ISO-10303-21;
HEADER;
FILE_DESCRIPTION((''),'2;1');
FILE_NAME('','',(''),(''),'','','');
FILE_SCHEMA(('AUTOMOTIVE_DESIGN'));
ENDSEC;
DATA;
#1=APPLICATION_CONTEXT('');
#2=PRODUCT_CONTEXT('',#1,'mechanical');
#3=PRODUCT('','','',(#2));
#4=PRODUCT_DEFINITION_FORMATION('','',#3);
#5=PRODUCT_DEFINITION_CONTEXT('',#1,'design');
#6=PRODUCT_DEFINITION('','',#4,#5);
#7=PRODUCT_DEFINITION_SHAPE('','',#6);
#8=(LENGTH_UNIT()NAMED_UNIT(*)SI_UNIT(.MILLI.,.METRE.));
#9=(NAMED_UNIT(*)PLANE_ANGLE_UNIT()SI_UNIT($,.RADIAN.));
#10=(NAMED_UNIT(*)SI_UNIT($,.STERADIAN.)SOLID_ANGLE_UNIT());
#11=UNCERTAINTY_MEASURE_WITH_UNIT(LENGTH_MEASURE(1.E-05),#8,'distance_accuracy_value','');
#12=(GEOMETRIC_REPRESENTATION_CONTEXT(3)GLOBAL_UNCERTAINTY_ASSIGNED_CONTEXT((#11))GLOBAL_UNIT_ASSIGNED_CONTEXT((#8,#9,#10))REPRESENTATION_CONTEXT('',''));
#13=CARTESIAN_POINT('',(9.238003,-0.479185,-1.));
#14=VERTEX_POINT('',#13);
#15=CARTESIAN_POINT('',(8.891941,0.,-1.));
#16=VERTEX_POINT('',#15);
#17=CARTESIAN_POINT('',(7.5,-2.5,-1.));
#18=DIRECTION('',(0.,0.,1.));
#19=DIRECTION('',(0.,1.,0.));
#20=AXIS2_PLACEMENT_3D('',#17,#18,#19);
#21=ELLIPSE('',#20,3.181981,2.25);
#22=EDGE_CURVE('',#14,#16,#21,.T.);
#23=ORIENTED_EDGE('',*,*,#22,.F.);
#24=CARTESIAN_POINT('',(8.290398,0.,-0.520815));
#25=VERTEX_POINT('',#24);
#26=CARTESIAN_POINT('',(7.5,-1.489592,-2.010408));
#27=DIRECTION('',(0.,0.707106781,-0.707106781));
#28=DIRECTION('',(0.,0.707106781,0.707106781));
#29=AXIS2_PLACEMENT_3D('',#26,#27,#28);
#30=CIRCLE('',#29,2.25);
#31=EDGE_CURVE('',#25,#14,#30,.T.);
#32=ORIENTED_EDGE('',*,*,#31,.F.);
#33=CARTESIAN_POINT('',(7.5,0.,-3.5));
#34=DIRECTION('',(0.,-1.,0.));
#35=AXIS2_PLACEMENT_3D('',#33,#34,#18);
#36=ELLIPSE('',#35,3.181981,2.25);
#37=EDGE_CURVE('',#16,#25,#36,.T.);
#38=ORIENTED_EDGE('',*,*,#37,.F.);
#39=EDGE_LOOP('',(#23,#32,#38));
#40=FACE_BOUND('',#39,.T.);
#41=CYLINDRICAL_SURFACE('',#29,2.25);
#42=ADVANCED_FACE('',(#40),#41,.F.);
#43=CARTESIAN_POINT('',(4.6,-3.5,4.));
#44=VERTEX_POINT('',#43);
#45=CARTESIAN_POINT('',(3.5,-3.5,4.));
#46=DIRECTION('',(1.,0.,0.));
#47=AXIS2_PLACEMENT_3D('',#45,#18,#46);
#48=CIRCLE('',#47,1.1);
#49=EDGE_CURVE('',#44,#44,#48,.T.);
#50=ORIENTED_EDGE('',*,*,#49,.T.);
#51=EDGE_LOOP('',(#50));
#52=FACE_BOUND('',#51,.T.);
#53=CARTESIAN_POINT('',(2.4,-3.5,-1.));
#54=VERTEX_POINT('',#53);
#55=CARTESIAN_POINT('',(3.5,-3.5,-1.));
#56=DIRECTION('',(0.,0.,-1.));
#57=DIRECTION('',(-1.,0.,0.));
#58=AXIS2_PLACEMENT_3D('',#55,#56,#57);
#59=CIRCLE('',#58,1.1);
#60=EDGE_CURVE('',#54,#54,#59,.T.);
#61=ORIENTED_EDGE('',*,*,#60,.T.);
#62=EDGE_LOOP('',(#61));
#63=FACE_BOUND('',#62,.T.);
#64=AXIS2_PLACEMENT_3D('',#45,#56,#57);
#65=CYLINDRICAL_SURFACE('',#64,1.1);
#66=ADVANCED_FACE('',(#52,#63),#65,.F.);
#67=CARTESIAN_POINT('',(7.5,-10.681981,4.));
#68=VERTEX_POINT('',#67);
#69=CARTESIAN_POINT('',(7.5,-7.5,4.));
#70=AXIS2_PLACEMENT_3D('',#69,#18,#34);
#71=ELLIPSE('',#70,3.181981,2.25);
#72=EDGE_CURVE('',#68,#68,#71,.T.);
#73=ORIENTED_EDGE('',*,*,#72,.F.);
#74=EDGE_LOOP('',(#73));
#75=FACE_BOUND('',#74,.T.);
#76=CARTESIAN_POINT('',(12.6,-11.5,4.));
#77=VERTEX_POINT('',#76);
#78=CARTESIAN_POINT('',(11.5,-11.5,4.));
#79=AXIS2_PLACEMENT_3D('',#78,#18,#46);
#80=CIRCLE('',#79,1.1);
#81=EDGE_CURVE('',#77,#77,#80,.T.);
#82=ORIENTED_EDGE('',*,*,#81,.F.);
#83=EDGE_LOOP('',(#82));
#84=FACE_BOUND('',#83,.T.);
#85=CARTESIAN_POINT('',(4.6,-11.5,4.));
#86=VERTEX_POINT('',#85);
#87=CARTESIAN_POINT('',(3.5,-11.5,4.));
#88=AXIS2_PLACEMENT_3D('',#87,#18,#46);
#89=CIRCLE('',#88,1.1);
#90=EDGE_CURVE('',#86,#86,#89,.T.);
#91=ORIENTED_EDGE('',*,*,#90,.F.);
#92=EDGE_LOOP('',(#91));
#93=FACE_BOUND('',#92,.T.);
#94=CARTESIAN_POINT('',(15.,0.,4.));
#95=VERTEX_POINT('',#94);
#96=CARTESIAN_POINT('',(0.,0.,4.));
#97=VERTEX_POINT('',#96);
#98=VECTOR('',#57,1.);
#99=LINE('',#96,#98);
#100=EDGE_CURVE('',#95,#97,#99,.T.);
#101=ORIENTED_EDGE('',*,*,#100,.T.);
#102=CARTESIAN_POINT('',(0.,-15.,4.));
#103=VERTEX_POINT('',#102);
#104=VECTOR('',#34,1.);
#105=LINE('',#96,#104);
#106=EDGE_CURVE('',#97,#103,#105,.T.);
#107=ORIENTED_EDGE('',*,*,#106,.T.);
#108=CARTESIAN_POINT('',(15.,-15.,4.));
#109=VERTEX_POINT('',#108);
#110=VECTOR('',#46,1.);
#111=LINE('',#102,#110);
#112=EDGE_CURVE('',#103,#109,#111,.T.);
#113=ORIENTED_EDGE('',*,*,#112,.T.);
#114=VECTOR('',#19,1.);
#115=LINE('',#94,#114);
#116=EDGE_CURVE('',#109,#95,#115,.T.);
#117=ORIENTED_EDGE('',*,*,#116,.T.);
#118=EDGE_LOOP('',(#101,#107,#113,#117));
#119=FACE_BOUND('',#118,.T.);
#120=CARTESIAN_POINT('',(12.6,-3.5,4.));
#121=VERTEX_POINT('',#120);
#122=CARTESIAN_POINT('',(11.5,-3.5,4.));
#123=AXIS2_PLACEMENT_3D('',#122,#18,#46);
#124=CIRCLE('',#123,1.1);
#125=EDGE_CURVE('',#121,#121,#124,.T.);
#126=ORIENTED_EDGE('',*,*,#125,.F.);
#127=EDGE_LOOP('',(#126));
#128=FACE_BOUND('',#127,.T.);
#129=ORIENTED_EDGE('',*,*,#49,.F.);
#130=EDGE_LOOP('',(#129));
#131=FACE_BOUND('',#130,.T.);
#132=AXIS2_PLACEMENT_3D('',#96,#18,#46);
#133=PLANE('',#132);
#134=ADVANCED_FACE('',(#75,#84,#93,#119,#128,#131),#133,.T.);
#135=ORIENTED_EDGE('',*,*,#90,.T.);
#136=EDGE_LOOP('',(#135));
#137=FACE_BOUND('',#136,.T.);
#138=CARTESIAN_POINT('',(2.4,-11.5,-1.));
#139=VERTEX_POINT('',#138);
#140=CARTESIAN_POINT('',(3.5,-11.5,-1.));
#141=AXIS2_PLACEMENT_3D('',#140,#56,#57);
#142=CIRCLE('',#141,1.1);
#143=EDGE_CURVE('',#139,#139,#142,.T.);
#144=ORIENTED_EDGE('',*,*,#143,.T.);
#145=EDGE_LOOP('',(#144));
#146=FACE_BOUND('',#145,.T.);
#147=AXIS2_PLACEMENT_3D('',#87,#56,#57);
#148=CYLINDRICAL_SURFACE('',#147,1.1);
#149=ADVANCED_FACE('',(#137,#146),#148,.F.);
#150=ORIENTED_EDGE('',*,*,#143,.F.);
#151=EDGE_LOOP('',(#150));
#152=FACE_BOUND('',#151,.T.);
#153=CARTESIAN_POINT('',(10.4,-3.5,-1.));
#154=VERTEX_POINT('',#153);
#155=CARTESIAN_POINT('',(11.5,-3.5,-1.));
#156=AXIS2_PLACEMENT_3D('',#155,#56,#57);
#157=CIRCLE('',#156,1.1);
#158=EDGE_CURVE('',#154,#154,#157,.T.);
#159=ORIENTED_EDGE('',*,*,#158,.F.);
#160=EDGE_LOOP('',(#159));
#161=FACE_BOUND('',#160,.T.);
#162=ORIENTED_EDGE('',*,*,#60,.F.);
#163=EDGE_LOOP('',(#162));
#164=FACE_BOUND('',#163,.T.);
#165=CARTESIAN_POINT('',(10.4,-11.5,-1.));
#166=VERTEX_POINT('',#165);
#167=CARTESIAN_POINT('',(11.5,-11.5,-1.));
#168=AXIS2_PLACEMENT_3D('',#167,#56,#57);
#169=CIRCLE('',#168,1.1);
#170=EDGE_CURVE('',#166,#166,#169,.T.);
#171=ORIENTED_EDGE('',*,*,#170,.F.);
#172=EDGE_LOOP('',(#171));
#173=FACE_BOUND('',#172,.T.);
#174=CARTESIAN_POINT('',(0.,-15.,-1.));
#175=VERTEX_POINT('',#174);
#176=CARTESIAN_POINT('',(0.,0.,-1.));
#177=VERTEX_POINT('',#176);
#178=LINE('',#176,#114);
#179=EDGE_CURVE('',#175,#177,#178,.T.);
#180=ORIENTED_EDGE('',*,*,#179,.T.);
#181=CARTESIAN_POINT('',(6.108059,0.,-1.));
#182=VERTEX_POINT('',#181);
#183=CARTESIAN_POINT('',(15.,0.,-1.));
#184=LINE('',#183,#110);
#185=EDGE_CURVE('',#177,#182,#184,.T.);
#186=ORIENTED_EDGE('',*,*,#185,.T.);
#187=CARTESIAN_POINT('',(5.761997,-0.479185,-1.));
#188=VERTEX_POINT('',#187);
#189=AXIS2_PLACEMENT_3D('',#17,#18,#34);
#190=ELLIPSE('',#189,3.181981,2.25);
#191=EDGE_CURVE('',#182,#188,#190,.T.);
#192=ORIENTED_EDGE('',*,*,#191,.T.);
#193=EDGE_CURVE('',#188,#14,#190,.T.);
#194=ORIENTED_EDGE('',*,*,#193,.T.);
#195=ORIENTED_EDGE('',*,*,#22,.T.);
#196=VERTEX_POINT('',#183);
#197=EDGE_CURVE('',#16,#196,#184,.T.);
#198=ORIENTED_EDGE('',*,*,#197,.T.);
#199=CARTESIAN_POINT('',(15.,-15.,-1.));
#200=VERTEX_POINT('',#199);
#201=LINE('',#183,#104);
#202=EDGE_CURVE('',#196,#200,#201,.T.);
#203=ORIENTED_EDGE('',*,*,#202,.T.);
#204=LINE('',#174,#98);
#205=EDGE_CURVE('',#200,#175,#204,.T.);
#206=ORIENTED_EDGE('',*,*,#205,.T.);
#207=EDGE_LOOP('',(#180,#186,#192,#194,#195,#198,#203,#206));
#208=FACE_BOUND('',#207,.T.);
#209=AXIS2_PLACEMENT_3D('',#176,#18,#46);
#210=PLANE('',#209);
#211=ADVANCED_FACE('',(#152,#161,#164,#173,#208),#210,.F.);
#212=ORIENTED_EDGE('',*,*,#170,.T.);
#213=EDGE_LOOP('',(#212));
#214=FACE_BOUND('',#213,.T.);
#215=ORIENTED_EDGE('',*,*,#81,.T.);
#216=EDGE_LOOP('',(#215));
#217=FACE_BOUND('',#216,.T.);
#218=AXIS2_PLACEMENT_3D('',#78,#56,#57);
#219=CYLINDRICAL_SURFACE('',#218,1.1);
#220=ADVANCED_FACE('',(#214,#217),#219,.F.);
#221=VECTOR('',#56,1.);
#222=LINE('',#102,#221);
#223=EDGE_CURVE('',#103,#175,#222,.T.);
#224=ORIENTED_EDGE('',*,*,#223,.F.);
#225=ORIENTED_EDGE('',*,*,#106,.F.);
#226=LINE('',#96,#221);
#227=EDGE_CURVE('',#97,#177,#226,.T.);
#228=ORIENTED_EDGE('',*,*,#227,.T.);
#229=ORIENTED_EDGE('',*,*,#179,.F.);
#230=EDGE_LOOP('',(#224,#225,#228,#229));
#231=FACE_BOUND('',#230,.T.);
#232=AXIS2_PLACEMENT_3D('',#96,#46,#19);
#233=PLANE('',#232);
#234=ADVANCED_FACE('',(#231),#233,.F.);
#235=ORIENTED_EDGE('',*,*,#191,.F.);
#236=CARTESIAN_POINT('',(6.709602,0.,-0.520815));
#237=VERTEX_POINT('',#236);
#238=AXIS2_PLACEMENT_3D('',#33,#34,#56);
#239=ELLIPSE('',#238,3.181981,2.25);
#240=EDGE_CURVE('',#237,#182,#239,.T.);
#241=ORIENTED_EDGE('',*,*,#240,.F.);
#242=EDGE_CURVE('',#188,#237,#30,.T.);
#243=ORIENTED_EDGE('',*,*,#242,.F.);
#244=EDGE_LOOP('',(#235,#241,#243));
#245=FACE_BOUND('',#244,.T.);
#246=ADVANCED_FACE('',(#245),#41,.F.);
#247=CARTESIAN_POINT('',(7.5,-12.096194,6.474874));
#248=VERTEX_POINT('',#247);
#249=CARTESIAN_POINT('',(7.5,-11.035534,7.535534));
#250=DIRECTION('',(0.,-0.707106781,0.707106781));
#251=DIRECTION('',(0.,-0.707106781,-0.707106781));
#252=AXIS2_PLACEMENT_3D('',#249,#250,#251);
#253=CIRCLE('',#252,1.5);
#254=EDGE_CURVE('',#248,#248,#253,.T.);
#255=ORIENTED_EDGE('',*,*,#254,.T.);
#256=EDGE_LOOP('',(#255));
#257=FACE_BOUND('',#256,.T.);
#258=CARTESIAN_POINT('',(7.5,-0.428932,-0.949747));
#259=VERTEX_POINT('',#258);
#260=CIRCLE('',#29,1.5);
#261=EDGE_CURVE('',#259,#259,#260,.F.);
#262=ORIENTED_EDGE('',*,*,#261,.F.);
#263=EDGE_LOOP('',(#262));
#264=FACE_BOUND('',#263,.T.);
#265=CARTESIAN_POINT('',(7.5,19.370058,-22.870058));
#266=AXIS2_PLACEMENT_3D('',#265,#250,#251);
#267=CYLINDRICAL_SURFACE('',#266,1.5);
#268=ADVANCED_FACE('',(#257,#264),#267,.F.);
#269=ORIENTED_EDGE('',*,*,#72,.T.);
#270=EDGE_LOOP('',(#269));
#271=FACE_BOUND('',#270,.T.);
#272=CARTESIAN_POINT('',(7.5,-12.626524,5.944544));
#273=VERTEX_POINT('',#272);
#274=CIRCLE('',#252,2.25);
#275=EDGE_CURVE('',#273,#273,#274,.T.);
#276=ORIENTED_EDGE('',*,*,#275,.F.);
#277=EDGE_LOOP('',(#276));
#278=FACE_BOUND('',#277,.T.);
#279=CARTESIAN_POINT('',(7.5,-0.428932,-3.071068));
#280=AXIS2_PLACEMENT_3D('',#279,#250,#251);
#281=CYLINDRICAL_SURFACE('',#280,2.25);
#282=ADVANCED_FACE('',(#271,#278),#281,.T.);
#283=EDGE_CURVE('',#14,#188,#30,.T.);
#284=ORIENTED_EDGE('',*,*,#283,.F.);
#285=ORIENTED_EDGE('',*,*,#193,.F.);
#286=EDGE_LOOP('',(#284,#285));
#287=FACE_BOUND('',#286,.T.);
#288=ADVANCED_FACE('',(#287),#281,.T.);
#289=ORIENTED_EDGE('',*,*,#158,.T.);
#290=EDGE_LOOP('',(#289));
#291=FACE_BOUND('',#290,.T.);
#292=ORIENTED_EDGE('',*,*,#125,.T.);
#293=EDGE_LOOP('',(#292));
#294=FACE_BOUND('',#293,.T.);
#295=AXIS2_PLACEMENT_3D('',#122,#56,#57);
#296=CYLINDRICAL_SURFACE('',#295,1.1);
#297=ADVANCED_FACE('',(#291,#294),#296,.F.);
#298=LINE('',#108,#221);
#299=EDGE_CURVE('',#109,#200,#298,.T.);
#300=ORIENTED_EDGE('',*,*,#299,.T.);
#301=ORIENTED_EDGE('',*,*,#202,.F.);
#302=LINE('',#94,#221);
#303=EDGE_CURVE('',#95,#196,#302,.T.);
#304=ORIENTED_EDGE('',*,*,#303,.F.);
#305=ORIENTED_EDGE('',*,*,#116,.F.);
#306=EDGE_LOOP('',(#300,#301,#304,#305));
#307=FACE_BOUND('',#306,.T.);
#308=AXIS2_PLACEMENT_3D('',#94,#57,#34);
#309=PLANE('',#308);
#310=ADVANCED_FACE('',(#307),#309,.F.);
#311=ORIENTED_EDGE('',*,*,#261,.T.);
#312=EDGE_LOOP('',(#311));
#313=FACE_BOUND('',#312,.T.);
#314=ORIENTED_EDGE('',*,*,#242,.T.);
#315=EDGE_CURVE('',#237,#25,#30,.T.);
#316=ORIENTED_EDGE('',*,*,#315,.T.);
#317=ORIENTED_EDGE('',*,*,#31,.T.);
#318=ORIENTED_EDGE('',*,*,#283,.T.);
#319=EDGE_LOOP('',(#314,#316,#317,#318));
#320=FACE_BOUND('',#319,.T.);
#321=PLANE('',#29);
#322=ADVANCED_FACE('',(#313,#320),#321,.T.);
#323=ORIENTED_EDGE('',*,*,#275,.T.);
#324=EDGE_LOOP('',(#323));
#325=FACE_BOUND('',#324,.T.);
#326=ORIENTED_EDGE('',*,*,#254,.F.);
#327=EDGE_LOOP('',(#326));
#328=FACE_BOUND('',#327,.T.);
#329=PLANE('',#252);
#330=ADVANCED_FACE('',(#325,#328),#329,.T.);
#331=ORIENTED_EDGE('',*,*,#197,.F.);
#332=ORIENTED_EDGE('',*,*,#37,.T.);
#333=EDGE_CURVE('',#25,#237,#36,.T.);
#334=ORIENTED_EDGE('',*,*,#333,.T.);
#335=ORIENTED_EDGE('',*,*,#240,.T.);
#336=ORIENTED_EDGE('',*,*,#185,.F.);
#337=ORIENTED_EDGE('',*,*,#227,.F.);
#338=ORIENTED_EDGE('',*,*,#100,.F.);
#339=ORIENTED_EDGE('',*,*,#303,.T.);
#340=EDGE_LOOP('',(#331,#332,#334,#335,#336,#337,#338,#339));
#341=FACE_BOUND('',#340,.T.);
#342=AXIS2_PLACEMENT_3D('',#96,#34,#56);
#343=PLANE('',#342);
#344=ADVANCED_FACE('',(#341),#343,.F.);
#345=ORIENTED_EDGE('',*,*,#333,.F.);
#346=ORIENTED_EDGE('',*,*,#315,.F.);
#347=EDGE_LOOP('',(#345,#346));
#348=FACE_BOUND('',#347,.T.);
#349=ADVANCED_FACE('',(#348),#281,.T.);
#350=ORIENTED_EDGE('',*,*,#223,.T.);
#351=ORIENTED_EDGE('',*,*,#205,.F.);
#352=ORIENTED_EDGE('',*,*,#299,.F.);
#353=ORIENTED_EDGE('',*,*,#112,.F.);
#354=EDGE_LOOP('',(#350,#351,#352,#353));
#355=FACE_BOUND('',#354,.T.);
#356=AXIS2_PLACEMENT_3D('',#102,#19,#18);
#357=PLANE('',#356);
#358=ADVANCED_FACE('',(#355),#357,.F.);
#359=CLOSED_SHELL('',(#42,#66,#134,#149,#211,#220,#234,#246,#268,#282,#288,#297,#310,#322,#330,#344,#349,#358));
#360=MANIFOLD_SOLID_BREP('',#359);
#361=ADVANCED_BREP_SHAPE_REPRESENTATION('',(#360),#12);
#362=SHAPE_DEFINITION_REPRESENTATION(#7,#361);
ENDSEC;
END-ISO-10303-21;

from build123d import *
from build123d.topology import SkipClean

# Parameters (mm, degrees)
SKETCH1_W            = 15
SKETCH1_H            = 15
SKETCH1_R            = 1.1
EXTRUDE1_DEPTH       = 4
EXTRUDE2_DEPTH       = 60
EXTRUDE2_DEPTH_BACK  = 4
SKETCH3_R            = 2
SKETCH4_R            = 1.75
EXTRUDE3_DEPTH       = 3
SKETCH5_R            = 2
EXTRUDE4_DEPTH       = 3
SKETCH9_R            = 0.5
EXTRUDE8_DEPTH       = 63
EXTRUDE_START        = 1
SKETCH_4_W           = 15
SKETCH_4_H           = 15
SKETCH_4_R           = 1.1
EXTRUDE_1_DEPTH      = 1
SKETCH_3_R           = 1.5
CUT_EXTRUDE_2_DEPTH  = 104
SKETCH_5_W           = 63.20966087
SKETCH_5_H           = 58.197081521
CUT_EXTRUDE_3_DEPTH  = 40
EXTRUDE_2_DEPTH      = 5
EXTRUDE_2_DEPTH_BACK = 10
SKETCH_6_R           = 2.25
SKETCH_6_R_2         = 1.5
CUT_EXTRUDE_START    = -1.5
SKETCH_7_R           = 2.25
CUT_EXTRUDE_4_DEPTH  = 1.5


with BuildPart() as part:
    # Sketch1 → Extrude1 (new body)
    with BuildSketch(Plane.XY):
        with Locations((7.5, -7.5)):
            Rectangle(SKETCH1_W, SKETCH1_H)
        with Locations((3.5, -3.5)):
            Circle(SKETCH1_R, mode=Mode.SUBTRACT)
        with Locations((11.5, -3.5)):
            Circle(SKETCH1_R, mode=Mode.SUBTRACT)
        with Locations((11.5, -11.5)):
            Circle(SKETCH1_R, mode=Mode.SUBTRACT)
        with Locations((3.5, -11.5)):
            Circle(SKETCH1_R, mode=Mode.SUBTRACT)
    extrude(amount=EXTRUDE1_DEPTH)

    # Sketch3 → Extrude2 (add, two sides: drawn at the far end of the back side and taken through both)
    with BuildSketch(Plane(origin=(0, -5.75, 5.75), x_dir=(1, 0, 0), z_dir=(0, -0.7071067811865488, 0.7071067811865464)).offset(-EXTRUDE2_DEPTH_BACK)):
        with Locations(Location((7.5, -2.474873734, 0), (0, 0, 270))):
            Circle(SKETCH3_R)
    extrude(amount=EXTRUDE2_DEPTH + EXTRUDE2_DEPTH_BACK)

    # Sketch4 → Extrude3 (add)
    with BuildSketch(Plane(origin=(0, -48.176406871, 48.176406871), x_dir=(1, 0, 0), z_dir=(0, -0.7071067811865487, 0.7071067811865465))):
        with Locations(Location((7.5, -2.474873734, 0), (0, 0, 90))):
            Circle(SKETCH4_R)
    extrude(amount=EXTRUDE3_DEPTH)

    # Sketch5 → Extrude4 (add)
    with BuildSketch(Plane(origin=(0, -50.297727215, 50.297727215), x_dir=(-1, 0, 0), z_dir=(0, -0.7071067811865486, 0.7071067811865465))):
        with Locations(Location((-7.5, 2.474873734, 0), (0, 0, 90))):
            Circle(SKETCH5_R)
    extrude(amount=EXTRUDE4_DEPTH)

    # Sketch9 → Extrude8 (cut)
    with BuildSketch(Plane(origin=(0, 0, 0), x_dir=(0, 0, -1), z_dir=(1, 0, 0))):
        with Locations(Location((-47.487067043, -50.987067043, 0), (0, 0, 180))):
            Circle(SKETCH9_R)
    extrude(amount=EXTRUDE8_DEPTH, mode=Mode.SUBTRACT)

    # 草图4 → 凸台-拉伸1 (add)
    with SkipClean():  # the faces are left unmerged after this step: merging them gives an invalid solid
        with BuildSketch(Plane(origin=(0, 0, 0), x_dir=(-1, 0, 0), z_dir=(0, 0, -1)).offset(EXTRUDE_START)):
            with Locations((-7.5, -7.5)):
                Rectangle(SKETCH_4_W, SKETCH_4_H)
            with Locations((-3.5, -3.5)):
                Circle(SKETCH_4_R, mode=Mode.SUBTRACT)
            with Locations((-11.5, -3.5)):
                Circle(SKETCH_4_R, mode=Mode.SUBTRACT)
            with Locations((-11.5, -11.5)):
                Circle(SKETCH_4_R, mode=Mode.SUBTRACT)
            with Locations((-3.5, -11.5)):
                Circle(SKETCH_4_R, mode=Mode.SUBTRACT)
        extrude(amount=-EXTRUDE_1_DEPTH)

    # 草图3 → 切除-拉伸2 (cut)
    with BuildSketch(Plane(origin=(0, -52.419047558, 52.419047558), x_dir=(1, 0, 0), z_dir=(0, -0.7071067811865487, 0.7071067811865465))):
        with Locations(Location((7.5, -2.474873734, 0), (0, 0, 270))):
            Circle(SKETCH_3_R)
    extrude(amount=-CUT_EXTRUDE_2_DEPTH, mode=Mode.SUBTRACT)

    # 草图5 → 切除-拉伸3 (cut)
    with SkipClean():  # the faces are left unmerged after this step: merging them gives an invalid solid
        with BuildSketch(Plane(origin=(15, 0, 0), x_dir=(0, 0, -1), z_dir=(1, 0, 0))):
            with Locations((-35.604830435, -29.098540761)):
                Rectangle(SKETCH_5_W, SKETCH_5_H)
        extrude(amount=-CUT_EXTRUDE_3_DEPTH, mode=Mode.SUBTRACT)
    add(part.part.scale(1), mode=Mode.REPLACE)  # the faces are merged on a copy

    # 草图6 → 凸台-拉伸2 (add, two sides: drawn at the far end of the back side and taken through both)
    with BuildSketch(Plane(origin=(0, -5.75, 5.75), x_dir=(1, 0, 0), z_dir=(0, -0.7071067811865488, 0.7071067811865464)).offset(-EXTRUDE_2_DEPTH_BACK)):
        with Locations(Location((7.5, -2.474873734, 0), (0, 0, 270))):
            Circle(SKETCH_6_R)
        with Locations(Location((7.5, -2.474873734, 0), (0, 0, 270))):
            Circle(SKETCH_6_R_2, mode=Mode.SUBTRACT)
    extrude(amount=EXTRUDE_2_DEPTH + EXTRUDE_2_DEPTH_BACK)

    # 草图7 → 切除-拉伸4 (cut)
    with SkipClean():  # the faces are left unmerged after this step: merging them gives an invalid solid
        with BuildSketch(Plane(origin=(0, 1.321067812, -1.321067812), x_dir=(1, 0, 0), z_dir=(0, 0.7071067811865487, -0.7071067811865465)).offset(CUT_EXTRUDE_START)):
            with Locations(Location((7.5, 2.474873734, 0), (0, 0, 90))):
                Circle(SKETCH_7_R)
        extrude(amount=CUT_EXTRUDE_4_DEPTH, mode=Mode.SUBTRACT)


solid = part.part
